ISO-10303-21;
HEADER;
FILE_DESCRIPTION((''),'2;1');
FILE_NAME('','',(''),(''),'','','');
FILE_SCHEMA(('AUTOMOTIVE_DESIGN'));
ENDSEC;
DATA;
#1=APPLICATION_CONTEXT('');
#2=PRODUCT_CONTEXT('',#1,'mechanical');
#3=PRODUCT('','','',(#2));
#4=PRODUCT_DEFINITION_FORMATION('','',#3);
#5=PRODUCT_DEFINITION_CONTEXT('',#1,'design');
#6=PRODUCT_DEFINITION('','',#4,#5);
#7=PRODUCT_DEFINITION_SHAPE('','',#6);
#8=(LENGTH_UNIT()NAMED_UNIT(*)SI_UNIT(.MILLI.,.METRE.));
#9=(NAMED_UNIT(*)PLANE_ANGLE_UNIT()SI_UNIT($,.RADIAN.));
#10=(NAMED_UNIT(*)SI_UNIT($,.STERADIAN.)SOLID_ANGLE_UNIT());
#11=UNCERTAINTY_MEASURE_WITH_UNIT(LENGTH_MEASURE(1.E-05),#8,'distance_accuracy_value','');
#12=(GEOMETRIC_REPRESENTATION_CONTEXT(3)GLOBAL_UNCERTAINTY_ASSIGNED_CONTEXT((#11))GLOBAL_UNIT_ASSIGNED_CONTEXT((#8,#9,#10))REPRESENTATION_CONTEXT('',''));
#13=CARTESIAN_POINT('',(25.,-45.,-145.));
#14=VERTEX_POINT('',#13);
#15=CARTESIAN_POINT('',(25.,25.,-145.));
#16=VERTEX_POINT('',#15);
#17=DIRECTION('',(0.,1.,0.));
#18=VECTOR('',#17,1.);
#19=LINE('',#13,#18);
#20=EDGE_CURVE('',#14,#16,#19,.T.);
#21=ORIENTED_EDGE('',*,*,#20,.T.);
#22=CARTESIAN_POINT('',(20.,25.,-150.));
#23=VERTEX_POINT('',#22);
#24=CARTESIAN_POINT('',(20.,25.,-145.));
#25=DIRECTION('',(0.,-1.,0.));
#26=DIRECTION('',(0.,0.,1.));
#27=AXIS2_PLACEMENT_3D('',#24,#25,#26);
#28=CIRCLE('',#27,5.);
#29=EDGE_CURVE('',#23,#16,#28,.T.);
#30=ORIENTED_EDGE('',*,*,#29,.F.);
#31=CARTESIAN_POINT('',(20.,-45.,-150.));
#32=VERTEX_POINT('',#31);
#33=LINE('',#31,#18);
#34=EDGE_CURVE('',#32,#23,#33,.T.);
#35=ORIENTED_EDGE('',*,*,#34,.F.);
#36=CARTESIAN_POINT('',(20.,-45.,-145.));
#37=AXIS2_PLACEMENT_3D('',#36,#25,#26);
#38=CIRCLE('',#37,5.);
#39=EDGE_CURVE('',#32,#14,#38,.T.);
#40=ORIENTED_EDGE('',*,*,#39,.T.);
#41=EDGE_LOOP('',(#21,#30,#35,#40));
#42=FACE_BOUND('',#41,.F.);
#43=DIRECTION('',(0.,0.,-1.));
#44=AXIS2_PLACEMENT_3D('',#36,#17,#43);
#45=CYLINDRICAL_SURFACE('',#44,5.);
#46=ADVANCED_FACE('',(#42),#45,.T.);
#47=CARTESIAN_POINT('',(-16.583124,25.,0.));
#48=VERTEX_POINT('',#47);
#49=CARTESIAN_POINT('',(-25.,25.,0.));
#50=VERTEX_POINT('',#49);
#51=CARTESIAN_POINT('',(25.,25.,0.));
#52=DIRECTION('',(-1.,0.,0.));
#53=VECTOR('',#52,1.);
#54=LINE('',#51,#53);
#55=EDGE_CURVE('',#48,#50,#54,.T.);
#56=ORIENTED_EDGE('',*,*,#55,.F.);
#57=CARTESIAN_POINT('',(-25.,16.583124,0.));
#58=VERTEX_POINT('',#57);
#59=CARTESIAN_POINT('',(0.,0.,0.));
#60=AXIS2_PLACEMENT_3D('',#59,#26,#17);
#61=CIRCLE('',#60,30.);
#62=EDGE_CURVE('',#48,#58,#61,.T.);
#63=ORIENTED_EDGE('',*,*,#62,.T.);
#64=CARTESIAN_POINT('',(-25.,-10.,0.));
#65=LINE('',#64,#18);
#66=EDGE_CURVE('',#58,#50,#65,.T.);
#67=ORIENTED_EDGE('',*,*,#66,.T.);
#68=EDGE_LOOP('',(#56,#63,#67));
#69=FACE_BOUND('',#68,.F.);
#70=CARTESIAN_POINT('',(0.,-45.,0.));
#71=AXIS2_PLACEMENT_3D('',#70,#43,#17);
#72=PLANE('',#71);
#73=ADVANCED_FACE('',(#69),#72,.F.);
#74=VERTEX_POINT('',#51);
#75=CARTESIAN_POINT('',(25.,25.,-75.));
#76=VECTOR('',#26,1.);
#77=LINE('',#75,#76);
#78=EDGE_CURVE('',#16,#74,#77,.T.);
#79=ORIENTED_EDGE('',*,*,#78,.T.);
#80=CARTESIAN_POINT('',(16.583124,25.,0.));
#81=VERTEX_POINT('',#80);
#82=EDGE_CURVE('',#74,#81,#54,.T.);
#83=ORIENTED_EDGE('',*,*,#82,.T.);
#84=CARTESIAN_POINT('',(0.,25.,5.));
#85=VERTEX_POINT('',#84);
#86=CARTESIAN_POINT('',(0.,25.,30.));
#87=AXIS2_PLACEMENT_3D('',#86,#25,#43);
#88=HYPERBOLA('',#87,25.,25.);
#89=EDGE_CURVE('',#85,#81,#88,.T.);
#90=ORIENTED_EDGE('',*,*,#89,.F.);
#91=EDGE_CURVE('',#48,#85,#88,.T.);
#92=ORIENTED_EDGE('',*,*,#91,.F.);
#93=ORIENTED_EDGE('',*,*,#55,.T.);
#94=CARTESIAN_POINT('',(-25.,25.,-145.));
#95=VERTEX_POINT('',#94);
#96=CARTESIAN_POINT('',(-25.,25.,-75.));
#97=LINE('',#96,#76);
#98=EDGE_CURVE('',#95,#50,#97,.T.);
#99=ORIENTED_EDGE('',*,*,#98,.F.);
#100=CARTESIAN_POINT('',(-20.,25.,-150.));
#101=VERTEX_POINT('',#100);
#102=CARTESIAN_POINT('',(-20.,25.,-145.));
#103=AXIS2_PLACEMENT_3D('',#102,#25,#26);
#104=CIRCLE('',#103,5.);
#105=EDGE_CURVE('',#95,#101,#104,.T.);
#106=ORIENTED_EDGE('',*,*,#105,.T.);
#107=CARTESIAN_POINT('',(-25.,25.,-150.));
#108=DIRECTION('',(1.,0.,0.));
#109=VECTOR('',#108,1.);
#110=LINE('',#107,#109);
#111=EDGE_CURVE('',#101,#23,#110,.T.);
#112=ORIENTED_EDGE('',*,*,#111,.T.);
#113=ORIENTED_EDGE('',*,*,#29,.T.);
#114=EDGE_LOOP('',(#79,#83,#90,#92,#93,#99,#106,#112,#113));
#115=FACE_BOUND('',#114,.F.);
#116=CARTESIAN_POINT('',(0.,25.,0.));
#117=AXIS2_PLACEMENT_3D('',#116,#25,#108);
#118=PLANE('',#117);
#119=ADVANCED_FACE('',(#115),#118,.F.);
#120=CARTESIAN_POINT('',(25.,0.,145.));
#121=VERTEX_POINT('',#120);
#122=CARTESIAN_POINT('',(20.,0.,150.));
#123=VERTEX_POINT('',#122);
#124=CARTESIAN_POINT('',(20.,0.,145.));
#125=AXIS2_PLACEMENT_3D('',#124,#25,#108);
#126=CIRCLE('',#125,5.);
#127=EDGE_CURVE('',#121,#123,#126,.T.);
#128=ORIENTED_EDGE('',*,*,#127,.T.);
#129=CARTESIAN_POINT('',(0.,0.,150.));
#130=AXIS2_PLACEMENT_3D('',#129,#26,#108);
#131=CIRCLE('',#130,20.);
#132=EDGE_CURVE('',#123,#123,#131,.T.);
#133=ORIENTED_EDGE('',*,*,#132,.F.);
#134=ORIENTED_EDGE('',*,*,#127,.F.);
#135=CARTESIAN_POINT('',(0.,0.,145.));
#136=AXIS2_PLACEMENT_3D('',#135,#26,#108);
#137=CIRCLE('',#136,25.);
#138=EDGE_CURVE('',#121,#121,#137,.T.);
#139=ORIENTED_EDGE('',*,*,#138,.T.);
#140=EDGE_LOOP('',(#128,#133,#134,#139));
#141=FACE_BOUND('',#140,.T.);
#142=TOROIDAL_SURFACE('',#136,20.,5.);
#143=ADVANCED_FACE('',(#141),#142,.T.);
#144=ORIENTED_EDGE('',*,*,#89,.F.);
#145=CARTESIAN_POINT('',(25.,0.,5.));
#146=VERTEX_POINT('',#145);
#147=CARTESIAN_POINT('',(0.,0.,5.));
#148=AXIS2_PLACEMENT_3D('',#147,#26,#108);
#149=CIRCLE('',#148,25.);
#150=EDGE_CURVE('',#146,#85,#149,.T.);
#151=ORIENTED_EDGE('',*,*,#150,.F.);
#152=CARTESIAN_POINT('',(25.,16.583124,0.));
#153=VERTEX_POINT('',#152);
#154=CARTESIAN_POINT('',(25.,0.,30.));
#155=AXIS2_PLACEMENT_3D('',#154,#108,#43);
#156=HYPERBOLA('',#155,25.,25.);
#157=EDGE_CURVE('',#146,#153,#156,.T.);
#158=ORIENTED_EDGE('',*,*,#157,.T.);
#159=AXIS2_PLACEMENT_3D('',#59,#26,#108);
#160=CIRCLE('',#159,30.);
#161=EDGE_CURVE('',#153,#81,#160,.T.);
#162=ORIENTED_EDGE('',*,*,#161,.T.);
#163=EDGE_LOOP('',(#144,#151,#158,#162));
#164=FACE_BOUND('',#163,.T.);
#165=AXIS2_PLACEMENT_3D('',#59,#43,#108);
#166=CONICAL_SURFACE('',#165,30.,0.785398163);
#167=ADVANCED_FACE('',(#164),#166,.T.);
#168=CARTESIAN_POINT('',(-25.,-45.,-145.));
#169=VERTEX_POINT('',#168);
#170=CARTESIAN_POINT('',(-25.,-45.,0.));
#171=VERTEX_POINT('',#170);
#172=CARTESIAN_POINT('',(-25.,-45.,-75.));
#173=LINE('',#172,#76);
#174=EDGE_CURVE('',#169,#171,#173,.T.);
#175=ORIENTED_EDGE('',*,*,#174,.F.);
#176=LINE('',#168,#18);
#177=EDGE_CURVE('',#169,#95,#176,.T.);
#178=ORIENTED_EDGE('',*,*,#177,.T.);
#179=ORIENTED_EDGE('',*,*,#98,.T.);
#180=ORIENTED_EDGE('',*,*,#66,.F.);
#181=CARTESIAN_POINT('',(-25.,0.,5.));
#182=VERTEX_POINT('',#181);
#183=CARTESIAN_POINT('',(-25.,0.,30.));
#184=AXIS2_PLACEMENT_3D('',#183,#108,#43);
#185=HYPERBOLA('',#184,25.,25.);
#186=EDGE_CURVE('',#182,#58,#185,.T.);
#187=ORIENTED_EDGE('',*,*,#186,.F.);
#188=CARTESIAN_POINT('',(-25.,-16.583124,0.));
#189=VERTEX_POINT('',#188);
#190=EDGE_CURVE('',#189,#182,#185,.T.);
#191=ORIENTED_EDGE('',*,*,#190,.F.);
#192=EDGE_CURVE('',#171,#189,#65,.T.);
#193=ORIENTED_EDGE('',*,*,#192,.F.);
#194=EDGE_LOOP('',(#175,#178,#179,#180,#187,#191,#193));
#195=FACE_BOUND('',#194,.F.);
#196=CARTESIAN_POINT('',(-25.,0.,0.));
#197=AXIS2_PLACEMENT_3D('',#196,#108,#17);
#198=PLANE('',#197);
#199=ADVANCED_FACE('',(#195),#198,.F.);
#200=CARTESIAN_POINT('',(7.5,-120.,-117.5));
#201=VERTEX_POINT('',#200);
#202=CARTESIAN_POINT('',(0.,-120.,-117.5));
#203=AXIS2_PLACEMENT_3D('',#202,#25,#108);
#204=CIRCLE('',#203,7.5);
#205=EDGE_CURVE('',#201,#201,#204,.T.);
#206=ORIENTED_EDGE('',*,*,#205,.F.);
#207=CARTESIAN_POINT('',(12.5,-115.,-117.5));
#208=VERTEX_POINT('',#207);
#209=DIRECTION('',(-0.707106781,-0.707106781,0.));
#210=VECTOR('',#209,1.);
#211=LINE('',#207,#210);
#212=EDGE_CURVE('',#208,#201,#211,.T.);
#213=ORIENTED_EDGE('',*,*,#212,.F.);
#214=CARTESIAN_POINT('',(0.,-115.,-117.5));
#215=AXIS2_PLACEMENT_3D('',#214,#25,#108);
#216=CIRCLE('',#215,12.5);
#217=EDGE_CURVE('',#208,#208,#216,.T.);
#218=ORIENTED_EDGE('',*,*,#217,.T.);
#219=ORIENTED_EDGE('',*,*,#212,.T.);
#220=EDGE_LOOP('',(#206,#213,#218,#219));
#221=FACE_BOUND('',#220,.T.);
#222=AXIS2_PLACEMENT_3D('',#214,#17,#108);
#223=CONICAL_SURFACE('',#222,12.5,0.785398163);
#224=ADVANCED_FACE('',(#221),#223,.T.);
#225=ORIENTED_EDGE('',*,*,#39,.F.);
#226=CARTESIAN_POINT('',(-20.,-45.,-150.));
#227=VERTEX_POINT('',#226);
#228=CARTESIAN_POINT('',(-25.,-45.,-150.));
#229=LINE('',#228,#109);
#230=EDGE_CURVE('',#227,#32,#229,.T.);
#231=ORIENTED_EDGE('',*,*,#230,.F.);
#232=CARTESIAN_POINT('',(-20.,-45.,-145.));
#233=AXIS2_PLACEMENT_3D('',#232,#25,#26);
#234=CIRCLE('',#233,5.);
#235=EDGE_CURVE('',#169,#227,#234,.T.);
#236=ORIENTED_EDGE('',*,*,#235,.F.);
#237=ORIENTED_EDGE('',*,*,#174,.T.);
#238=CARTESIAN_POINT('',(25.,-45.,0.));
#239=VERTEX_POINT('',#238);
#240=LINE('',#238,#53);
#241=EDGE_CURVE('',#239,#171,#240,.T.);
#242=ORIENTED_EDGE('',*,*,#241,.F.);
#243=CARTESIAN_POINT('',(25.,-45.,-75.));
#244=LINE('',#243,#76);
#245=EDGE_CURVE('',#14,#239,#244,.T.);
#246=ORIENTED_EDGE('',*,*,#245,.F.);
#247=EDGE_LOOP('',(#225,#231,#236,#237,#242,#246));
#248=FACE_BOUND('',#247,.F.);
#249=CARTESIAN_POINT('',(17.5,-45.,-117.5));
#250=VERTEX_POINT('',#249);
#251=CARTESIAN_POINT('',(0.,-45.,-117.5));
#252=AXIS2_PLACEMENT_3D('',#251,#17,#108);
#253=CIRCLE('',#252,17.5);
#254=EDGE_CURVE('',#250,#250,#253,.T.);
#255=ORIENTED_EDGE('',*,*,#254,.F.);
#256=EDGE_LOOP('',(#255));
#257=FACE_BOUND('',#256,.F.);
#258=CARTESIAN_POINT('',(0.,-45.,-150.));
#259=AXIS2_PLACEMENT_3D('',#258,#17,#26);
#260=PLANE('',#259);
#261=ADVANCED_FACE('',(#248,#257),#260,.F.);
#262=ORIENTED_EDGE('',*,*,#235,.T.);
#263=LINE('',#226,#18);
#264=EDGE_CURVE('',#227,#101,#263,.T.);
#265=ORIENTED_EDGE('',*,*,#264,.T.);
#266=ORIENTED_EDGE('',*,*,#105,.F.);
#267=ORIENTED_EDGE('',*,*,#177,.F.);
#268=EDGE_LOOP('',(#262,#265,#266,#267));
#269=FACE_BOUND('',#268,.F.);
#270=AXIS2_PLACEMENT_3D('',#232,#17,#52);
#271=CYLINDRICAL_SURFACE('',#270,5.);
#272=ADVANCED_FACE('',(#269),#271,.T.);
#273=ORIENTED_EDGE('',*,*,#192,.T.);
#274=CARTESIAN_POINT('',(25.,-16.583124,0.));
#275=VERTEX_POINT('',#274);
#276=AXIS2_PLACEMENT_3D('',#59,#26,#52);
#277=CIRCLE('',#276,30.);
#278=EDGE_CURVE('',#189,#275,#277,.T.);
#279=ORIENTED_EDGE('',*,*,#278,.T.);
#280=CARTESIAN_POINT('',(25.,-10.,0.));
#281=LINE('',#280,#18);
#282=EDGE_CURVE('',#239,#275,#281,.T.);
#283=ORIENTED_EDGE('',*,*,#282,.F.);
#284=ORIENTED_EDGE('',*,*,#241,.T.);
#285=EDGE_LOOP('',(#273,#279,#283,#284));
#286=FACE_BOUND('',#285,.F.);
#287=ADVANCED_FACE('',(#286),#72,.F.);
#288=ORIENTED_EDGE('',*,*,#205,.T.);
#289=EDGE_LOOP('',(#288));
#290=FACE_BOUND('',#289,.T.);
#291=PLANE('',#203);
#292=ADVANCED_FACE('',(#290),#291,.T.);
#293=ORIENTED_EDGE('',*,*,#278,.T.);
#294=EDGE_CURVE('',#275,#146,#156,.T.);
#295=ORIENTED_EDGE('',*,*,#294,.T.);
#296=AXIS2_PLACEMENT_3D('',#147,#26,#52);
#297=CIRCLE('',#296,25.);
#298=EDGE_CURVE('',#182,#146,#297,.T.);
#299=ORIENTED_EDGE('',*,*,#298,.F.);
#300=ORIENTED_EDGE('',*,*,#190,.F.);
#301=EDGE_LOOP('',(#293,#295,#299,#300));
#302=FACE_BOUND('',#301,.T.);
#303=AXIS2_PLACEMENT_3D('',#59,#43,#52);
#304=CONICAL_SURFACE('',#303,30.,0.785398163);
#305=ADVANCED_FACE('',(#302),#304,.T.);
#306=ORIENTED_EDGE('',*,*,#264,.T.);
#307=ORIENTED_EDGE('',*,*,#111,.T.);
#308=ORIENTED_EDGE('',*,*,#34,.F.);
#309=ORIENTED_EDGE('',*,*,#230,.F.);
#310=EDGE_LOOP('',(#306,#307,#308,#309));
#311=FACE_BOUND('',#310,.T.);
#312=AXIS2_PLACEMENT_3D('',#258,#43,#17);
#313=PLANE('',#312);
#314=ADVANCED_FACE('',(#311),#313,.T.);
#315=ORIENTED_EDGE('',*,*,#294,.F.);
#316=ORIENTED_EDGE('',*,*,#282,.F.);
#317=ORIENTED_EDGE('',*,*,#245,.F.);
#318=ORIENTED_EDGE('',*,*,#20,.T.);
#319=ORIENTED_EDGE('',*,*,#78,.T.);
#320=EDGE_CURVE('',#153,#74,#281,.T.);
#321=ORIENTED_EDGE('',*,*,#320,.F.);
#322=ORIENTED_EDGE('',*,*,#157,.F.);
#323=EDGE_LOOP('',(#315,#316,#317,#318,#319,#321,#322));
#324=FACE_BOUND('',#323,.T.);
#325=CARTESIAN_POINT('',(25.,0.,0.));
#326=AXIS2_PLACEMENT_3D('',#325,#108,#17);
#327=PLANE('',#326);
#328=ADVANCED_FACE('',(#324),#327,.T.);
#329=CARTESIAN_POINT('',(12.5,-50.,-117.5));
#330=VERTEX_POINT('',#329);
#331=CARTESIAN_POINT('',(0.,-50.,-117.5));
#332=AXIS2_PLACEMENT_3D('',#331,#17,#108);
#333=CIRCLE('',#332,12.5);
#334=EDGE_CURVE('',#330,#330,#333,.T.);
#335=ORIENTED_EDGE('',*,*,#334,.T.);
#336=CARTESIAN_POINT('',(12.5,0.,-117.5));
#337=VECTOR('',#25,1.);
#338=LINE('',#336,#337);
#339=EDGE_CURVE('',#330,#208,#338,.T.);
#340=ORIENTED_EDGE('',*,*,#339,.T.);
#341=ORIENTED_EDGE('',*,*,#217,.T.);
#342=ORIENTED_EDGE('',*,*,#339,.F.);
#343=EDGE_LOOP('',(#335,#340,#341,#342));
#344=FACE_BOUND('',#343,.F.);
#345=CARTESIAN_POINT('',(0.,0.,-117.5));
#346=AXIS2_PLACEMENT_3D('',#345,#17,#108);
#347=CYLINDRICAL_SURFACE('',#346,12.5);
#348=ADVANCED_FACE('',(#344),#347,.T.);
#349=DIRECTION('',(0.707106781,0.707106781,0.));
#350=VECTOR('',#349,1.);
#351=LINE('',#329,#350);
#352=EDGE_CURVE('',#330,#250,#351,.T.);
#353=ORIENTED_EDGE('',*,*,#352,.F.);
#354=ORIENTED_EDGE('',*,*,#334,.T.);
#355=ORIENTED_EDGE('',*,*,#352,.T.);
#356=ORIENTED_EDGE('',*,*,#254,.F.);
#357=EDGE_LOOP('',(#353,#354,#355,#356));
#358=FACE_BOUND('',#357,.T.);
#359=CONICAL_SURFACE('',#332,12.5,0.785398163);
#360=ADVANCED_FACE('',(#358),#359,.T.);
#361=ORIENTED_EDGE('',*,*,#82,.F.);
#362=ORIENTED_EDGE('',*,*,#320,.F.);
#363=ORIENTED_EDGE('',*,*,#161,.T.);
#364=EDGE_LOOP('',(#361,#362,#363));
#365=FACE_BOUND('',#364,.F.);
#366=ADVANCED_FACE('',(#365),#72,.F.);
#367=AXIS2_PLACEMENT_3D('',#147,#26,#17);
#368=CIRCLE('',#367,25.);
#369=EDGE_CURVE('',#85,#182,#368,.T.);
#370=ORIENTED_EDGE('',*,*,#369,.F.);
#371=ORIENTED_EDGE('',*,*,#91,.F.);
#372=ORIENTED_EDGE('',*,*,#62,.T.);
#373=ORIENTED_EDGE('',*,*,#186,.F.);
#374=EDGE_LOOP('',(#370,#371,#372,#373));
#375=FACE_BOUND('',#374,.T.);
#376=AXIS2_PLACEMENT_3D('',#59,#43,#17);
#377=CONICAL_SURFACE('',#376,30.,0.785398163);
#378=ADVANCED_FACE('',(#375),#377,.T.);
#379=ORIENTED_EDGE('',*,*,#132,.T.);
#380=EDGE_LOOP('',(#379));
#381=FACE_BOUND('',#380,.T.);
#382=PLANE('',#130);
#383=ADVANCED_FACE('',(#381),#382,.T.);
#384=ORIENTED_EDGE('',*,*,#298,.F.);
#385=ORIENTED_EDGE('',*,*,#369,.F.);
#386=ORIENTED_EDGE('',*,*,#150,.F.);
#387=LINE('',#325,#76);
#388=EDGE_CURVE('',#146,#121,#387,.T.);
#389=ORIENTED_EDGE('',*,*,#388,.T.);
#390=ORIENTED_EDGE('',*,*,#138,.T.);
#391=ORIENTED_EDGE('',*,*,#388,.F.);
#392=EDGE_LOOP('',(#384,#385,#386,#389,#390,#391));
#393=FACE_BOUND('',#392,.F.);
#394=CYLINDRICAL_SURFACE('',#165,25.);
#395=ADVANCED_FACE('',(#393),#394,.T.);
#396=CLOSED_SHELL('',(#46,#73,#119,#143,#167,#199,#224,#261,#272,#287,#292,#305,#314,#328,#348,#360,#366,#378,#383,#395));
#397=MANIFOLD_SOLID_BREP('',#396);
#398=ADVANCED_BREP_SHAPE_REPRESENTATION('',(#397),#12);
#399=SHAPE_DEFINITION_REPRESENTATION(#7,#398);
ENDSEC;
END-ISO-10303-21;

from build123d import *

# Parameters (mm, degrees)
F1_W         = 70
F1_H         = 150
F2_DEPTH     = 25
F0_R         = 25
F3_DEPTH     = 150
F4_R         = 5
F5_R         = 5
F6_R         = 5
F7_T4_ANGLE  = 180
F7_T10_ANGLE = 90
F7_T16_ANGLE = 90
F8_R         = 12.5
F9_DEPTH     = 120
F10_SIZE     = 5


# Not quite as in the source:
# - a fillet or chamfer that OpenCascade refuses, or shapes differently, is made with other operations: its cross-section is extruded or revolved along the edge and cut away or added


with BuildPart() as f2:
    # F1 (on Right) → F2 (new body, symmetric)
    with BuildSketch(Plane.YZ):
        with Locations((-10, -75)):
            Rectangle(F1_W, F1_H)
    extrude(amount=F2_DEPTH, both=True)

    # F0 (on Top) → F3 (join)
    with BuildSketch(Plane.XY):
        Circle(F0_R)
    extrude(amount=F3_DEPTH)

    # F4
    f4_edges = [f2.edges().sort_by_distance(p)[0] for p in [
        (-25, 0, 150),
    ]]
    fillet(f4_edges, radius=F4_R)

    # F5
    f5_edges = [f2.edges().sort_by_distance(p)[0] for p in [
        (-25, -10, -150),
    ]]
    fillet(f5_edges, radius=F5_R)

    # F6
    f6_edges = [f2.edges().sort_by_distance(p)[0] for p in [
        (25, -10, -150),
    ]]
    fillet(f6_edges, radius=F6_R)

    # F7: chamfer of 5 on 3 edges, made by hand


with BuildPart() as f7_tool2:
    # F7_s3 → F7_t4 (revolve)
    with BuildSketch(Plane.XZ):
        Polygon((-30, 0), (-25, 5), (-25, 0), align=None)
    revolve(axis=Axis((0, 0, 0), (0, 0, 1)), revolution_arc=F7_T4_ANGLE)

    split(bisect_by=Plane.YZ.offset(25), keep=Keep.BOTTOM)

    split(bisect_by=Plane.YZ.offset(-25), keep=Keep.TOP)


with BuildPart() as f2_1:
    add(f2.part)

    # F7_t1: union F7_tool2
    add(f7_tool2.part)


with BuildPart() as f7_tool8:
    # F7_s9 → F7_t10 (revolve)
    with BuildSketch(Plane.XZ):
        Polygon((30, 0), (25, 5), (25, 0), align=None)
    revolve(axis=Axis((0, 0, 0), (0, 0, 1)), revolution_arc=F7_T10_ANGLE)

    split(bisect_by=Plane.YZ.offset(25), keep=Keep.BOTTOM)

    split(bisect_by=Plane.XZ.offset(-25), keep=Keep.TOP)


with BuildPart() as f2_2:
    add(f2_1.part)

    # F7_t7: union F7_tool8
    add(f7_tool8.part)


with BuildPart() as f7_tool14:
    # F7_s15 → F7_t16 (revolve)
    with BuildSketch(Plane.YZ):
        Polygon((30, 0), (25, 5), (25, 0), align=None)
    revolve(axis=Axis((0, 0, 0), (0, 0, 1)), revolution_arc=F7_T16_ANGLE)

    split(bisect_by=Plane.YZ.offset(-25), keep=Keep.TOP)

    split(bisect_by=Plane.XZ.offset(-25), keep=Keep.TOP)


with BuildPart() as f2_3:
    add(f2_2.part)

    # F7_t13: union F7_tool14
    add(f7_tool14.part)

    # F8 (on Front) → F9 (join)
    with BuildSketch(Plane.XZ):
        with Locations((0, -117.5)):
            Circle(F8_R)
    extrude(amount=F9_DEPTH)

    # F10
    f10_edges = [f2_3.edges().sort_by_distance(p)[0] for p in [
        (-12.5, -120, -117.5),
        (-12.5, -45, -117.5),
    ]]
    chamfer(f10_edges, length=F10_SIZE)


solid = f2_3.part
